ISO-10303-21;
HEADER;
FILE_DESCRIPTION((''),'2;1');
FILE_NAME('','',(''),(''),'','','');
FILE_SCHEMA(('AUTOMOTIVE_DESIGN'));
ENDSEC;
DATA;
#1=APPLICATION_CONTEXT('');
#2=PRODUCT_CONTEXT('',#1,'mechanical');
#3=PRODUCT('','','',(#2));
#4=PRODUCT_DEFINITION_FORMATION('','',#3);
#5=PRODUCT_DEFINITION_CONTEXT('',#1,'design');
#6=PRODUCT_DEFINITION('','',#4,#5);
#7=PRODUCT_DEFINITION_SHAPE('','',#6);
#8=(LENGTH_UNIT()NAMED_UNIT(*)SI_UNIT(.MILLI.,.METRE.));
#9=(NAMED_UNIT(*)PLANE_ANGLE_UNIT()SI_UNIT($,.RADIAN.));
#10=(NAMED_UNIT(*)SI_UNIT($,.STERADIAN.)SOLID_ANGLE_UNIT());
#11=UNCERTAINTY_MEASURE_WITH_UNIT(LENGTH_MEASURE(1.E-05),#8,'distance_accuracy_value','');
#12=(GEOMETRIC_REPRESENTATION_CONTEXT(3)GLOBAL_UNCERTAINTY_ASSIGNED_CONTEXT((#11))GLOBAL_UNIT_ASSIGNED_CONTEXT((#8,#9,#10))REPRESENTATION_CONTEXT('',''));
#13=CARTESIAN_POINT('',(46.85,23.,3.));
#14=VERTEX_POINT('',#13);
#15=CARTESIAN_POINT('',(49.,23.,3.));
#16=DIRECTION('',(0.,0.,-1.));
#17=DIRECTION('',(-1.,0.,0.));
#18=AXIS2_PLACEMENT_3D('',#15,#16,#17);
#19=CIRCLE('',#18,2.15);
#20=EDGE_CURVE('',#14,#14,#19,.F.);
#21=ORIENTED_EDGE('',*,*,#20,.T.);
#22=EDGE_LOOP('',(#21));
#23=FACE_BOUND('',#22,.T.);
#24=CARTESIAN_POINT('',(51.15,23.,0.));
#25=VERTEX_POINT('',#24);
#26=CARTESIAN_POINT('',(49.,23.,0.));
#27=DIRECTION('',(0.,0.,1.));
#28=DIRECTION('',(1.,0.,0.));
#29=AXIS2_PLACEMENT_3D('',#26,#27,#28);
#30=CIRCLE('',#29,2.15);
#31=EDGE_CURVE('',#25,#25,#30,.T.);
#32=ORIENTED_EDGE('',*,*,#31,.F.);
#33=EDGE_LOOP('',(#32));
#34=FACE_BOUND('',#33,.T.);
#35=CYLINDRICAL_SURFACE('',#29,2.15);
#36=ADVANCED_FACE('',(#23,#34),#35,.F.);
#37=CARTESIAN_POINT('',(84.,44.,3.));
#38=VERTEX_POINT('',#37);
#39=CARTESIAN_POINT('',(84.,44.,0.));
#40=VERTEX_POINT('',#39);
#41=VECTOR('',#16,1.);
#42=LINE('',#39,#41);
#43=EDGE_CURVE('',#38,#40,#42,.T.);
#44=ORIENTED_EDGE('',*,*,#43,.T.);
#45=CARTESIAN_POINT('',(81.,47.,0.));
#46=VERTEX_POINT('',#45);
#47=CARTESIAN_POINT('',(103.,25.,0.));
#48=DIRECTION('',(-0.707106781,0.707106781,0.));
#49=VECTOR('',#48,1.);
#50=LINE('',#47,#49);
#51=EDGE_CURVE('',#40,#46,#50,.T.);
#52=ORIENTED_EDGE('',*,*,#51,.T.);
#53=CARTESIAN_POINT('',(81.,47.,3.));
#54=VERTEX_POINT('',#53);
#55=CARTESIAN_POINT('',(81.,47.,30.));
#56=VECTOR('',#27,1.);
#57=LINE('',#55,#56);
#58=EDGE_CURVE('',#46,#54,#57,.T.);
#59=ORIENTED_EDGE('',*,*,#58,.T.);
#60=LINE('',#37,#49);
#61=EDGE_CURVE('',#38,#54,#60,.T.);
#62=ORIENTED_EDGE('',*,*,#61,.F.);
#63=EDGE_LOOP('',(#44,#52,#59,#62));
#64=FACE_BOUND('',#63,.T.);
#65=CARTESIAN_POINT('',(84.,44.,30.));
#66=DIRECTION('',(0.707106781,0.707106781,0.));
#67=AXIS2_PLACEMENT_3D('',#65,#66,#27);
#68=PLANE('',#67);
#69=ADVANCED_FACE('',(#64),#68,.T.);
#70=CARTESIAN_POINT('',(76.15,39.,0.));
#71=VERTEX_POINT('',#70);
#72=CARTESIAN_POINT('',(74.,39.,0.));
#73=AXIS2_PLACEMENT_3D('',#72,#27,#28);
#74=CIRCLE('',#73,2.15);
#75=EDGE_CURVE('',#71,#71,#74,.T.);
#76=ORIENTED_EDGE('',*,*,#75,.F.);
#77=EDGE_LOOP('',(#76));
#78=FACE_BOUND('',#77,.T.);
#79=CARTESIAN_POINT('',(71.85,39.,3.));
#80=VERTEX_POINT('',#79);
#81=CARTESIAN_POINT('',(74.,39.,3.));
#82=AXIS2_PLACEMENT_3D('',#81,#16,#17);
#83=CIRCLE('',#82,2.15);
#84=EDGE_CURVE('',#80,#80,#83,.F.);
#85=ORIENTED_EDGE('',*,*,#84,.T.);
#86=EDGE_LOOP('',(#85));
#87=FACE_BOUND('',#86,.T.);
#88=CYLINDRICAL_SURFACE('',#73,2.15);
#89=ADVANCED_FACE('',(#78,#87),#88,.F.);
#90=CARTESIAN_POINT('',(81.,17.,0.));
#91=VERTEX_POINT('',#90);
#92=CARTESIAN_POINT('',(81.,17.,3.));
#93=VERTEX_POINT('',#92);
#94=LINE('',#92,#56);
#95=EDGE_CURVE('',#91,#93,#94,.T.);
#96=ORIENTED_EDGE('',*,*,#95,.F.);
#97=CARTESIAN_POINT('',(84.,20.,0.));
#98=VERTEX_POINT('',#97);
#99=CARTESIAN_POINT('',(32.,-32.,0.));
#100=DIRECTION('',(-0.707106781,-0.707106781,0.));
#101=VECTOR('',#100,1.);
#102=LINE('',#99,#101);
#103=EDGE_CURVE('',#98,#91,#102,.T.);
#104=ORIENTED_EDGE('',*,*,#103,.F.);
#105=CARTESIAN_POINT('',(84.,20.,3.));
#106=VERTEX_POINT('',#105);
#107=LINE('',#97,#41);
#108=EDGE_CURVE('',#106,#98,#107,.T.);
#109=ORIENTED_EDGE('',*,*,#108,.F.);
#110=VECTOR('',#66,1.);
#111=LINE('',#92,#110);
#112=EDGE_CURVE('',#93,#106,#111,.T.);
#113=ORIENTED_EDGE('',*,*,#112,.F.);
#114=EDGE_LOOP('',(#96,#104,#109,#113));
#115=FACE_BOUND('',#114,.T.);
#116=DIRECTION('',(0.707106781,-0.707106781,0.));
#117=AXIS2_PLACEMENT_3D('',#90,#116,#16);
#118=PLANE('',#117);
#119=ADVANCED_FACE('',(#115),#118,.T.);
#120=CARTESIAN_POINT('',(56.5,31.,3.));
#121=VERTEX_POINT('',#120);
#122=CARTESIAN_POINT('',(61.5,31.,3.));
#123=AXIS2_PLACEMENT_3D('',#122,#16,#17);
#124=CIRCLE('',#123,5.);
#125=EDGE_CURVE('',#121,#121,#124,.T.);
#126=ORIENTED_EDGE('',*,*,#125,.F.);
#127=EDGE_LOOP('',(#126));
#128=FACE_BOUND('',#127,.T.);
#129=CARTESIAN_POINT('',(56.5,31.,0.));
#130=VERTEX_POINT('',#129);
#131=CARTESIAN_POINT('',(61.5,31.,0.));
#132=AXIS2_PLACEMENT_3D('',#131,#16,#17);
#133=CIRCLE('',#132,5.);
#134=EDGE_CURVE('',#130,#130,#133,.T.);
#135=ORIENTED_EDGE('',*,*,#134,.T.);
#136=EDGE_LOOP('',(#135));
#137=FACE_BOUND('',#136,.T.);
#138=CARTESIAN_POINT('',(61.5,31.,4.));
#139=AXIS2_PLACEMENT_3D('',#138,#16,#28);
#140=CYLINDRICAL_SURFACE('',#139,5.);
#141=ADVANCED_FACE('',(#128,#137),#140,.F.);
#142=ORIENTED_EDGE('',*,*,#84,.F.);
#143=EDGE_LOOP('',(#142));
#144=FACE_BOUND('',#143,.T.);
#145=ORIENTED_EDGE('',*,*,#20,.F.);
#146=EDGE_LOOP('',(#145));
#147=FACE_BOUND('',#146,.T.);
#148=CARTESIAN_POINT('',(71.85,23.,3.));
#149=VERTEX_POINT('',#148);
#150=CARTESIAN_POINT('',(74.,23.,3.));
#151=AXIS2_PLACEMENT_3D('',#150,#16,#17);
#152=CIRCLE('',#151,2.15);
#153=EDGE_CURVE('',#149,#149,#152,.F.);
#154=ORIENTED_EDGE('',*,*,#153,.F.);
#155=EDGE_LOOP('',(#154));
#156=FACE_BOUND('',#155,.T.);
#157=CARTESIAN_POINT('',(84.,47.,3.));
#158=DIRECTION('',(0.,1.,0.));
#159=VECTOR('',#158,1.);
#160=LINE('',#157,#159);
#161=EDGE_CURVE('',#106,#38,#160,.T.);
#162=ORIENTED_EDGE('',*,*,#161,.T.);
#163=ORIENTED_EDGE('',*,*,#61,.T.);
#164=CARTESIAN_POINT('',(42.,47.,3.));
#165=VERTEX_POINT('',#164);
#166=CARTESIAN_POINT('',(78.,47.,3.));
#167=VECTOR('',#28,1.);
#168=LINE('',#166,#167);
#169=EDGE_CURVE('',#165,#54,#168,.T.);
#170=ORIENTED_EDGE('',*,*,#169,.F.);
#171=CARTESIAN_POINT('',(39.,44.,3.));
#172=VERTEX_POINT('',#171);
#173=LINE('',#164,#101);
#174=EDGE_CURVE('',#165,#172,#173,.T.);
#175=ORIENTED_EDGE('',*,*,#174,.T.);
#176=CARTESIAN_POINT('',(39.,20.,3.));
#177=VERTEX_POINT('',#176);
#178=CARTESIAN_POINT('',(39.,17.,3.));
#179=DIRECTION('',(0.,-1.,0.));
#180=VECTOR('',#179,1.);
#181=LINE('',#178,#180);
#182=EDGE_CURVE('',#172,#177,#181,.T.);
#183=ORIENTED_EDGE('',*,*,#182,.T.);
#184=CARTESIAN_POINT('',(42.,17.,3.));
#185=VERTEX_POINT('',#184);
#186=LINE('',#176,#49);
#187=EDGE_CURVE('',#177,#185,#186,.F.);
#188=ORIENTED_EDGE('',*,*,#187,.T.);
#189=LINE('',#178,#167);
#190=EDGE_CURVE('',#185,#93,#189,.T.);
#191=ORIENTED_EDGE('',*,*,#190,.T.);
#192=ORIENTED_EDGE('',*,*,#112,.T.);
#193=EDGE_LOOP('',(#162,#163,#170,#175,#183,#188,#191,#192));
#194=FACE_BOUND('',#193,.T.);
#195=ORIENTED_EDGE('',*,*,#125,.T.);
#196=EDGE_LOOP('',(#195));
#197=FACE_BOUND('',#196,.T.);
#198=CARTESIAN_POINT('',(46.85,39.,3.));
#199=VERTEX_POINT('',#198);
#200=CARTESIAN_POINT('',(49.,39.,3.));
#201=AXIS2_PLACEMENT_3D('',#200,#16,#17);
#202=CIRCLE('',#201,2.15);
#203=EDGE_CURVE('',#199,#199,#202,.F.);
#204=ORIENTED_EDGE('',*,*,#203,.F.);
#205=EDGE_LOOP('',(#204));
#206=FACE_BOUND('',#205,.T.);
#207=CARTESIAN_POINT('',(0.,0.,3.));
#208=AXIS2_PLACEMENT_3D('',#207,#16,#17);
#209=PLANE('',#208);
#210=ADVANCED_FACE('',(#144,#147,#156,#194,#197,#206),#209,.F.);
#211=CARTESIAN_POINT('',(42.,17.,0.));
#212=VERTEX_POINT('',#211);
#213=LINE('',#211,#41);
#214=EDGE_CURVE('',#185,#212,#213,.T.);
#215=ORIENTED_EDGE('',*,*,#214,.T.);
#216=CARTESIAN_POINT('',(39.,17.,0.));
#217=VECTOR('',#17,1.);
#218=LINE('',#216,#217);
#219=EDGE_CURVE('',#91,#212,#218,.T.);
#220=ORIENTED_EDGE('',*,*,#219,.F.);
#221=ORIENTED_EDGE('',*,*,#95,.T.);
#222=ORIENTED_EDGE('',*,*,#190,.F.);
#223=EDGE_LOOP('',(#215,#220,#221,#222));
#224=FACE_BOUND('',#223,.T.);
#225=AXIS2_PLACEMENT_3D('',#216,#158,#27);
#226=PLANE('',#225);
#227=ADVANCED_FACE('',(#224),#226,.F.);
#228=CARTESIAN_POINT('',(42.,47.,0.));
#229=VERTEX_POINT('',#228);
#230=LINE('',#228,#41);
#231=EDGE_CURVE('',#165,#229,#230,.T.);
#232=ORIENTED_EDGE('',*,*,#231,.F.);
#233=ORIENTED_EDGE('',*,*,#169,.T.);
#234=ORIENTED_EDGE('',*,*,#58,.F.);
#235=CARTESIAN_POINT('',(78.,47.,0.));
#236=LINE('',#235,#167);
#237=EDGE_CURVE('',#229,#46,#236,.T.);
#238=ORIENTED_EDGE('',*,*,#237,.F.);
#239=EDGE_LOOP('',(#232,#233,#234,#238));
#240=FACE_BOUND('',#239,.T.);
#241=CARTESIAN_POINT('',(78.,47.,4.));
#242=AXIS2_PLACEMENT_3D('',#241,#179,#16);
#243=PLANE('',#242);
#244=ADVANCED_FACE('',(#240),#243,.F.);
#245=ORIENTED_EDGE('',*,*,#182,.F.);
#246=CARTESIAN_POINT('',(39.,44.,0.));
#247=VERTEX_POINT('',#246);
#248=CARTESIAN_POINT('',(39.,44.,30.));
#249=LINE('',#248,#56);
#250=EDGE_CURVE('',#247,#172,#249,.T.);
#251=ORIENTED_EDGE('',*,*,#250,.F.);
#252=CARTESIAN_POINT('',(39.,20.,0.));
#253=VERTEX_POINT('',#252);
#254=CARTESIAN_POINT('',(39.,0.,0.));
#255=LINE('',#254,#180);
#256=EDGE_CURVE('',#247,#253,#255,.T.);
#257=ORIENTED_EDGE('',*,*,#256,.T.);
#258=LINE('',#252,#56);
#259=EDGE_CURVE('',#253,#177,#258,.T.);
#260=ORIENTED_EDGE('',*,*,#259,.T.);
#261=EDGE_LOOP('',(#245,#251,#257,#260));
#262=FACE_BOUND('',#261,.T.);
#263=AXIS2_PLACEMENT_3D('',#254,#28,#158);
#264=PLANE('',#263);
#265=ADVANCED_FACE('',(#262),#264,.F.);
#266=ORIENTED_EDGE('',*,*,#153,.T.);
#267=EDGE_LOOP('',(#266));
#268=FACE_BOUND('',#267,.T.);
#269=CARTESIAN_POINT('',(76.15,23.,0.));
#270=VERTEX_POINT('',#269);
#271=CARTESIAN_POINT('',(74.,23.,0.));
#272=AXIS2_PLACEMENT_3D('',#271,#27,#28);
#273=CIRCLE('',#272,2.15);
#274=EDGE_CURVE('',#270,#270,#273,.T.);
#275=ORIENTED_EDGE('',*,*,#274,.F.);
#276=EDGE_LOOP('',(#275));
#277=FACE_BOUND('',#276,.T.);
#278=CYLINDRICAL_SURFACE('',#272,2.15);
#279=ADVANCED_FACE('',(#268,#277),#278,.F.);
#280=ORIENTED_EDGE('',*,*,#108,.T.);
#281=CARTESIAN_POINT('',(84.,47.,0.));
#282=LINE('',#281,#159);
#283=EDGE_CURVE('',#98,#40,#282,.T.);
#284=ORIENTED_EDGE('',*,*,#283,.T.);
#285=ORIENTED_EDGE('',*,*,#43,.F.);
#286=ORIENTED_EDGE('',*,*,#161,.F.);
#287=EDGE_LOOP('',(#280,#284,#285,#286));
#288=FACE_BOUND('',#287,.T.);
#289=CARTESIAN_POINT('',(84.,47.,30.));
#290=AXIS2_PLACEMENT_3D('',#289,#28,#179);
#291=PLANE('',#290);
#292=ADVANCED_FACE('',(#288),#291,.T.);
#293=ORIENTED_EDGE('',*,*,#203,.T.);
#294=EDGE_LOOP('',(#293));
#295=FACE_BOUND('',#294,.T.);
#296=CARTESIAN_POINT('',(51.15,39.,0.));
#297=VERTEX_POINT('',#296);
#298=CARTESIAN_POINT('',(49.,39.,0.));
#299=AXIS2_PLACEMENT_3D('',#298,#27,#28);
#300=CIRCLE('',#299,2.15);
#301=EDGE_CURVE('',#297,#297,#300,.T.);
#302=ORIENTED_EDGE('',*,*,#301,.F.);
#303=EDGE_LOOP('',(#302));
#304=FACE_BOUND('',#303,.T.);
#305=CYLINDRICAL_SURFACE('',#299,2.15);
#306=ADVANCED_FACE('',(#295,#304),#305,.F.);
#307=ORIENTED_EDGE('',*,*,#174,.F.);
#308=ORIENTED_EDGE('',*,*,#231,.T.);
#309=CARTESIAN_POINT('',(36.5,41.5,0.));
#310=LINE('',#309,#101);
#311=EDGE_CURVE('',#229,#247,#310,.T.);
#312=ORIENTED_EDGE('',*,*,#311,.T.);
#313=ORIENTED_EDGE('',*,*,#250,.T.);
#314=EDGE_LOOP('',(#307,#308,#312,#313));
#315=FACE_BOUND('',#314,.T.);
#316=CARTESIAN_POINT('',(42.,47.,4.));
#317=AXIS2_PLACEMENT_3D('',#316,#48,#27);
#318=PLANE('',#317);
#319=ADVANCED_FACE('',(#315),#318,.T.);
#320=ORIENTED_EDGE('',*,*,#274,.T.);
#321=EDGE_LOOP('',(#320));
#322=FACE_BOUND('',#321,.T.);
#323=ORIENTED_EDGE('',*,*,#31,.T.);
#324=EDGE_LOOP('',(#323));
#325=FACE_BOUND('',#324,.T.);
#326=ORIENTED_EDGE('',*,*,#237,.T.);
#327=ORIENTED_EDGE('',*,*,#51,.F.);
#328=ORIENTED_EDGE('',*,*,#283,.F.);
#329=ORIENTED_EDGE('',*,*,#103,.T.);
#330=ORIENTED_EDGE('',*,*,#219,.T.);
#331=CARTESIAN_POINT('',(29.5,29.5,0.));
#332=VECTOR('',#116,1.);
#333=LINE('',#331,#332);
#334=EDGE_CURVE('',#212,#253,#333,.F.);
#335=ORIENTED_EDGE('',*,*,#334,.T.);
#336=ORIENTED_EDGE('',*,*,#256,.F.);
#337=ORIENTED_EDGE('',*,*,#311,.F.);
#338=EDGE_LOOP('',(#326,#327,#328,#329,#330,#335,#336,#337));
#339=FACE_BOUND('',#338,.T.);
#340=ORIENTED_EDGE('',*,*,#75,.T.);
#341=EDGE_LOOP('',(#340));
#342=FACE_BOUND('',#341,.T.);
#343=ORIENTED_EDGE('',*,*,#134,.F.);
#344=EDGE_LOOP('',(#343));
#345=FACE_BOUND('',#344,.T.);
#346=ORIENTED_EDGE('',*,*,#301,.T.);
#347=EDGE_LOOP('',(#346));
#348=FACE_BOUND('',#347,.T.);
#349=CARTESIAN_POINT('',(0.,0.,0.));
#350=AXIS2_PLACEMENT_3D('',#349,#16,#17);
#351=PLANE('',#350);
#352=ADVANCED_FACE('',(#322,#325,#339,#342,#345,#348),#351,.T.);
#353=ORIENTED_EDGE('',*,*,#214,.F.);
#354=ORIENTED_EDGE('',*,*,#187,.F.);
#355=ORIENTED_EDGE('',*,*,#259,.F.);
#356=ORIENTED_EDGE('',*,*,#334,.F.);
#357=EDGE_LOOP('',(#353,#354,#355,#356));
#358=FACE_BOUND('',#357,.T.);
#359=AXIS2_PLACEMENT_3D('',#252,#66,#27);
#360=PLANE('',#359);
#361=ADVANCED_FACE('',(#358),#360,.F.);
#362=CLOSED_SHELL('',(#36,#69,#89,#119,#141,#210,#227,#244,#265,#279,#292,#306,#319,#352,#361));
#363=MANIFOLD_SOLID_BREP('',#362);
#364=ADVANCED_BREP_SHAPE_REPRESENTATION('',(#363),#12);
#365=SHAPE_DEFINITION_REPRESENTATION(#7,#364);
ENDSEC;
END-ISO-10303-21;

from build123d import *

# Parameters (mm, degrees)
SKETCH_1_W               = 33
SKETCH_1_H               = 47
SKETCH_1_R               = 5
EXTRUDE_1_DEPTH          = 4
EXTRUDE_2_DEPTH          = 30
SKETCH_4_W               = 33
SKETCH_4_H               = 38
EXTRUDE_3_DEPTH          = 4
CHAMFER_1_SIZE           = 3
SKETCH_5_W               = 10
SKETCH_5_H               = 30
EXTRUDE_4_DEPTH          = 6
SKETCH_6_R               = 2.15
CUT_EXTRUDE_1_DEPTH      = 88.143559716
SKETCH_7_R               = 2.15
CUT_EXTRUDE_2_DEPTH      = 60
SKETCH_8_W               = 142.872393379
SKETCH_8_H               = 129.651084076
CUT_EXTRUDE_3_DEPTH      = 88.143559716
CUT_EXTRUDE_START        = -26
SKETCH_9_W               = 6
SKETCH_9_H               = 85
SKETCH_9_H_2             = 55
CUT_EXTRUDE_4_DEPTH      = 26
SKETCH_10_R              = 6.65
EXTRUDE_5_DEPTH          = 5.2
EXTRUDE_6_DEPTH          = 6
CHAMFER_2_SIZE           = 5.2
EXTRUDE_START            = -6
SKETCH_12_R              = 2.15
EXTRUDE_7_DEPTH          = 6
SKETCH_13_R              = 2.15
CUT_EXTRUDE_5_DEPTH      = 110.424128966
CUT_EXTRUDE_6_DEPTH      = 110.424128966
CUT_EXTRUDE_6_DEPTH_BACK = 110.424128966
SKETCH_14_W              = 45
SKETCH_14_H              = 81.938700875
SKETCH_15_W              = 48.923705392
SKETCH_15_H              = 34.943280138
CUT_EXTRUDE_7_DEPTH      = 6.2
CHAMFER_3_SIZE           = 3


with BuildPart() as part:
    # 草图1 → 凸台-拉伸1 (new body)
    with BuildSketch(Plane.XY):
        with Locations((16.5, 23.5)):
            Rectangle(SKETCH_1_W, SKETCH_1_H)
        with Locations((16.5, 31)):
            Circle(SKETCH_1_R, mode=Mode.SUBTRACT)
    extrude(amount=EXTRUDE_1_DEPTH)

    # 草图3 → 凸台-拉伸2 (add)
    with BuildSketch(Plane(origin=(0, 0, 0), x_dir=(-1, 0, 0), z_dir=(0, 0, -1))):
        Polygon((0, -38), (-33, -38), (-33, 47), (-39, 47), (-39, -63), (-26.75, -63), (-26.75, -43), (-6.25, -43), (-6.25, -63), (6, -63), (6, 47), (0, 47), align=None)
    extrude(amount=-EXTRUDE_2_DEPTH)

    # 草图4 → 凸台-拉伸3 (add)
    with BuildSketch(Plane(origin=(0, 0, 0), x_dir=(-1, 0, 0), z_dir=(0, 0, -1))):
        with Locations((-16.5, -19)):
            Rectangle(SKETCH_4_W, SKETCH_4_H)
    extrude(amount=-EXTRUDE_3_DEPTH)

    # 倒角1
    chamfer_1_edges = [part.edges().sort_by_distance(p)[0] for p in [
        (-6, 47, 15),
        (-6, -63, 15),
        (39, -63, 15),
        (39, 47, 15),
    ]]
    chamfer(chamfer_1_edges, length=CHAMFER_1_SIZE)

    # 草图5 → 凸台-拉伸4 (add)
    with BuildSketch(Plane(origin=(39, 0, 0), x_dir=(0, 0, -1), z_dir=(1, 0, 0))):
        with Locations((-35, -23)):
            Rectangle(SKETCH_5_W, SKETCH_5_H)
    extrude(amount=-EXTRUDE_4_DEPTH)

    # 草图6 → 切除-拉伸1 (cut, through all)
    with BuildSketch(Plane(origin=(39, 0, 0), x_dir=(0, 0, -1), z_dir=(1, 0, 0))):
        with Locations(Location((-11, -32, 0), (0, 0, 90))):
            Circle(SKETCH_6_R)
        with Locations(Location((-35, -32, 0), (0, 0, 90))):
            Circle(SKETCH_6_R)
        with Locations(Location((-11, -14, 0), (0, 0, 90))):
            Circle(SKETCH_6_R)
        with Locations(Location((-35, -14, 0), (0, 0, 90))):
            Circle(SKETCH_6_R)
    extrude(amount=-CUT_EXTRUDE_1_DEPTH, mode=Mode.SUBTRACT)

    # 草图7 → 切除-拉伸2 (cut)
    with BuildSketch(Plane.ZY.offset(6)):
        with Locations(Location((15, -53, 0), (0, 0, 270))):
            Circle(SKETCH_7_R)
    extrude(amount=-CUT_EXTRUDE_2_DEPTH, mode=Mode.SUBTRACT)

    # 镜向1: part across plane


with BuildPart() as part_1:
    add(part.part)
    add(part.part.mirror(Plane(origin=(39, 0, 0), x_dir=(0, 0, 1), z_dir=(1, 0, 0))))

    # 草图8 → 切除-拉伸3 (cut, through all)
    with BuildSketch(Plane(origin=(39, 0, 0), x_dir=(0, 0, -1), z_dir=(1, 0, 0))):
        with Locations((-14.281868294, -7.269848701)):
            Rectangle(SKETCH_8_W, SKETCH_8_H)
    extrude(amount=-CUT_EXTRUDE_3_DEPTH, mode=Mode.SUBTRACT)

    # 草图9 → 切除-拉伸4 (cut)
    with BuildSketch(Plane.XY.offset(30).offset(CUT_EXTRUDE_START)):
        with Locations((81, 4.5)):
            Rectangle(SKETCH_9_W, SKETCH_9_H)
        with Locations((42, 19.5)):
            Rectangle(SKETCH_9_W, SKETCH_9_H_2)
    extrude(amount=CUT_EXTRUDE_4_DEPTH, mode=Mode.SUBTRACT)

    # 草图10 → 凸台-拉伸5 (add)
    with BuildSketch(Plane.XY.offset(4)):
        Polygon((42, 47), (39, 44), (39, 17), (84, 17), (84, 44), (81, 47), align=None)
        with Locations((61.5, 31)):
            Circle(SKETCH_10_R, mode=Mode.SUBTRACT)
    extrude(amount=EXTRUDE_5_DEPTH)

    # 草图11 → 凸台-拉伸6 (add)
    with BuildSketch(Plane.ZY.offset(-39)):
        Polygon((40, -8), (4, -8), (4, 17), (9.2, 17), align=None)
    extrude(amount=-EXTRUDE_6_DEPTH)

    # 倒角2
    chamfer_2_edges = [part_1.edges().sort_by_distance(p)[0] for p in [
        (64.5, 17, 4),
    ]]
    chamfer(chamfer_2_edges, length=CHAMFER_2_SIZE - 0.0001)  # a hair under: the kernel refuses the full size

    # 草图12 → 凸台-拉伸7 (add)
    with BuildSketch(Plane(origin=(84, 0, 0), x_dir=(0, 0, -1), z_dir=(1, 0, 0)).offset(EXTRUDE_START)):
        Polygon((-30, -38), (-4, -38), (-4, -13), align=None)
        with Locations(Location((-11, -32, 0), (0, 0, 90))):
            Circle(SKETCH_12_R, mode=Mode.SUBTRACT)
    extrude(amount=EXTRUDE_7_DEPTH)

    # 草图13 → 切除-拉伸5 (cut, through all)
    with BuildSketch(Plane.XY.offset(9.2)):
        with Locations((49, 39)):
            Circle(SKETCH_13_R)
        with Locations((49, 23)):
            Circle(SKETCH_13_R)
        with Locations((74, 39)):
            Circle(SKETCH_13_R)
        with Locations((74, 23)):
            Circle(SKETCH_13_R)
    extrude(amount=-CUT_EXTRUDE_5_DEPTH, mode=Mode.SUBTRACT)

    # 草图14 → 切除-拉伸6 (cut, two sides: drawn at the far end of the back side and taken through both)
    with BuildSketch(Plane.XY.offset(9.2).offset(-CUT_EXTRUDE_6_DEPTH_BACK)):
        with Locations((61.5, -23.969350438)):
            Rectangle(SKETCH_14_W, SKETCH_14_H)
    extrude(amount=CUT_EXTRUDE_6_DEPTH + CUT_EXTRUDE_6_DEPTH_BACK, mode=Mode.SUBTRACT)

    # 草图15 → 切除-拉伸7 (cut)
    with BuildSketch(Plane.XY.offset(9.2)):
        with Locations((63.461852696, 34.471640069)):
            Rectangle(SKETCH_15_W, SKETCH_15_H)
    extrude(amount=-CUT_EXTRUDE_7_DEPTH, mode=Mode.SUBTRACT)

    # 倒角3
    chamfer_3_edges = [part_1.edges().sort_by_distance(p)[0] for p in [
        (84, 17, 1.5),
        (39, 17, 1.5),
    ]]
    chamfer(chamfer_3_edges, length=CHAMFER_3_SIZE)


solid = part_1.part
